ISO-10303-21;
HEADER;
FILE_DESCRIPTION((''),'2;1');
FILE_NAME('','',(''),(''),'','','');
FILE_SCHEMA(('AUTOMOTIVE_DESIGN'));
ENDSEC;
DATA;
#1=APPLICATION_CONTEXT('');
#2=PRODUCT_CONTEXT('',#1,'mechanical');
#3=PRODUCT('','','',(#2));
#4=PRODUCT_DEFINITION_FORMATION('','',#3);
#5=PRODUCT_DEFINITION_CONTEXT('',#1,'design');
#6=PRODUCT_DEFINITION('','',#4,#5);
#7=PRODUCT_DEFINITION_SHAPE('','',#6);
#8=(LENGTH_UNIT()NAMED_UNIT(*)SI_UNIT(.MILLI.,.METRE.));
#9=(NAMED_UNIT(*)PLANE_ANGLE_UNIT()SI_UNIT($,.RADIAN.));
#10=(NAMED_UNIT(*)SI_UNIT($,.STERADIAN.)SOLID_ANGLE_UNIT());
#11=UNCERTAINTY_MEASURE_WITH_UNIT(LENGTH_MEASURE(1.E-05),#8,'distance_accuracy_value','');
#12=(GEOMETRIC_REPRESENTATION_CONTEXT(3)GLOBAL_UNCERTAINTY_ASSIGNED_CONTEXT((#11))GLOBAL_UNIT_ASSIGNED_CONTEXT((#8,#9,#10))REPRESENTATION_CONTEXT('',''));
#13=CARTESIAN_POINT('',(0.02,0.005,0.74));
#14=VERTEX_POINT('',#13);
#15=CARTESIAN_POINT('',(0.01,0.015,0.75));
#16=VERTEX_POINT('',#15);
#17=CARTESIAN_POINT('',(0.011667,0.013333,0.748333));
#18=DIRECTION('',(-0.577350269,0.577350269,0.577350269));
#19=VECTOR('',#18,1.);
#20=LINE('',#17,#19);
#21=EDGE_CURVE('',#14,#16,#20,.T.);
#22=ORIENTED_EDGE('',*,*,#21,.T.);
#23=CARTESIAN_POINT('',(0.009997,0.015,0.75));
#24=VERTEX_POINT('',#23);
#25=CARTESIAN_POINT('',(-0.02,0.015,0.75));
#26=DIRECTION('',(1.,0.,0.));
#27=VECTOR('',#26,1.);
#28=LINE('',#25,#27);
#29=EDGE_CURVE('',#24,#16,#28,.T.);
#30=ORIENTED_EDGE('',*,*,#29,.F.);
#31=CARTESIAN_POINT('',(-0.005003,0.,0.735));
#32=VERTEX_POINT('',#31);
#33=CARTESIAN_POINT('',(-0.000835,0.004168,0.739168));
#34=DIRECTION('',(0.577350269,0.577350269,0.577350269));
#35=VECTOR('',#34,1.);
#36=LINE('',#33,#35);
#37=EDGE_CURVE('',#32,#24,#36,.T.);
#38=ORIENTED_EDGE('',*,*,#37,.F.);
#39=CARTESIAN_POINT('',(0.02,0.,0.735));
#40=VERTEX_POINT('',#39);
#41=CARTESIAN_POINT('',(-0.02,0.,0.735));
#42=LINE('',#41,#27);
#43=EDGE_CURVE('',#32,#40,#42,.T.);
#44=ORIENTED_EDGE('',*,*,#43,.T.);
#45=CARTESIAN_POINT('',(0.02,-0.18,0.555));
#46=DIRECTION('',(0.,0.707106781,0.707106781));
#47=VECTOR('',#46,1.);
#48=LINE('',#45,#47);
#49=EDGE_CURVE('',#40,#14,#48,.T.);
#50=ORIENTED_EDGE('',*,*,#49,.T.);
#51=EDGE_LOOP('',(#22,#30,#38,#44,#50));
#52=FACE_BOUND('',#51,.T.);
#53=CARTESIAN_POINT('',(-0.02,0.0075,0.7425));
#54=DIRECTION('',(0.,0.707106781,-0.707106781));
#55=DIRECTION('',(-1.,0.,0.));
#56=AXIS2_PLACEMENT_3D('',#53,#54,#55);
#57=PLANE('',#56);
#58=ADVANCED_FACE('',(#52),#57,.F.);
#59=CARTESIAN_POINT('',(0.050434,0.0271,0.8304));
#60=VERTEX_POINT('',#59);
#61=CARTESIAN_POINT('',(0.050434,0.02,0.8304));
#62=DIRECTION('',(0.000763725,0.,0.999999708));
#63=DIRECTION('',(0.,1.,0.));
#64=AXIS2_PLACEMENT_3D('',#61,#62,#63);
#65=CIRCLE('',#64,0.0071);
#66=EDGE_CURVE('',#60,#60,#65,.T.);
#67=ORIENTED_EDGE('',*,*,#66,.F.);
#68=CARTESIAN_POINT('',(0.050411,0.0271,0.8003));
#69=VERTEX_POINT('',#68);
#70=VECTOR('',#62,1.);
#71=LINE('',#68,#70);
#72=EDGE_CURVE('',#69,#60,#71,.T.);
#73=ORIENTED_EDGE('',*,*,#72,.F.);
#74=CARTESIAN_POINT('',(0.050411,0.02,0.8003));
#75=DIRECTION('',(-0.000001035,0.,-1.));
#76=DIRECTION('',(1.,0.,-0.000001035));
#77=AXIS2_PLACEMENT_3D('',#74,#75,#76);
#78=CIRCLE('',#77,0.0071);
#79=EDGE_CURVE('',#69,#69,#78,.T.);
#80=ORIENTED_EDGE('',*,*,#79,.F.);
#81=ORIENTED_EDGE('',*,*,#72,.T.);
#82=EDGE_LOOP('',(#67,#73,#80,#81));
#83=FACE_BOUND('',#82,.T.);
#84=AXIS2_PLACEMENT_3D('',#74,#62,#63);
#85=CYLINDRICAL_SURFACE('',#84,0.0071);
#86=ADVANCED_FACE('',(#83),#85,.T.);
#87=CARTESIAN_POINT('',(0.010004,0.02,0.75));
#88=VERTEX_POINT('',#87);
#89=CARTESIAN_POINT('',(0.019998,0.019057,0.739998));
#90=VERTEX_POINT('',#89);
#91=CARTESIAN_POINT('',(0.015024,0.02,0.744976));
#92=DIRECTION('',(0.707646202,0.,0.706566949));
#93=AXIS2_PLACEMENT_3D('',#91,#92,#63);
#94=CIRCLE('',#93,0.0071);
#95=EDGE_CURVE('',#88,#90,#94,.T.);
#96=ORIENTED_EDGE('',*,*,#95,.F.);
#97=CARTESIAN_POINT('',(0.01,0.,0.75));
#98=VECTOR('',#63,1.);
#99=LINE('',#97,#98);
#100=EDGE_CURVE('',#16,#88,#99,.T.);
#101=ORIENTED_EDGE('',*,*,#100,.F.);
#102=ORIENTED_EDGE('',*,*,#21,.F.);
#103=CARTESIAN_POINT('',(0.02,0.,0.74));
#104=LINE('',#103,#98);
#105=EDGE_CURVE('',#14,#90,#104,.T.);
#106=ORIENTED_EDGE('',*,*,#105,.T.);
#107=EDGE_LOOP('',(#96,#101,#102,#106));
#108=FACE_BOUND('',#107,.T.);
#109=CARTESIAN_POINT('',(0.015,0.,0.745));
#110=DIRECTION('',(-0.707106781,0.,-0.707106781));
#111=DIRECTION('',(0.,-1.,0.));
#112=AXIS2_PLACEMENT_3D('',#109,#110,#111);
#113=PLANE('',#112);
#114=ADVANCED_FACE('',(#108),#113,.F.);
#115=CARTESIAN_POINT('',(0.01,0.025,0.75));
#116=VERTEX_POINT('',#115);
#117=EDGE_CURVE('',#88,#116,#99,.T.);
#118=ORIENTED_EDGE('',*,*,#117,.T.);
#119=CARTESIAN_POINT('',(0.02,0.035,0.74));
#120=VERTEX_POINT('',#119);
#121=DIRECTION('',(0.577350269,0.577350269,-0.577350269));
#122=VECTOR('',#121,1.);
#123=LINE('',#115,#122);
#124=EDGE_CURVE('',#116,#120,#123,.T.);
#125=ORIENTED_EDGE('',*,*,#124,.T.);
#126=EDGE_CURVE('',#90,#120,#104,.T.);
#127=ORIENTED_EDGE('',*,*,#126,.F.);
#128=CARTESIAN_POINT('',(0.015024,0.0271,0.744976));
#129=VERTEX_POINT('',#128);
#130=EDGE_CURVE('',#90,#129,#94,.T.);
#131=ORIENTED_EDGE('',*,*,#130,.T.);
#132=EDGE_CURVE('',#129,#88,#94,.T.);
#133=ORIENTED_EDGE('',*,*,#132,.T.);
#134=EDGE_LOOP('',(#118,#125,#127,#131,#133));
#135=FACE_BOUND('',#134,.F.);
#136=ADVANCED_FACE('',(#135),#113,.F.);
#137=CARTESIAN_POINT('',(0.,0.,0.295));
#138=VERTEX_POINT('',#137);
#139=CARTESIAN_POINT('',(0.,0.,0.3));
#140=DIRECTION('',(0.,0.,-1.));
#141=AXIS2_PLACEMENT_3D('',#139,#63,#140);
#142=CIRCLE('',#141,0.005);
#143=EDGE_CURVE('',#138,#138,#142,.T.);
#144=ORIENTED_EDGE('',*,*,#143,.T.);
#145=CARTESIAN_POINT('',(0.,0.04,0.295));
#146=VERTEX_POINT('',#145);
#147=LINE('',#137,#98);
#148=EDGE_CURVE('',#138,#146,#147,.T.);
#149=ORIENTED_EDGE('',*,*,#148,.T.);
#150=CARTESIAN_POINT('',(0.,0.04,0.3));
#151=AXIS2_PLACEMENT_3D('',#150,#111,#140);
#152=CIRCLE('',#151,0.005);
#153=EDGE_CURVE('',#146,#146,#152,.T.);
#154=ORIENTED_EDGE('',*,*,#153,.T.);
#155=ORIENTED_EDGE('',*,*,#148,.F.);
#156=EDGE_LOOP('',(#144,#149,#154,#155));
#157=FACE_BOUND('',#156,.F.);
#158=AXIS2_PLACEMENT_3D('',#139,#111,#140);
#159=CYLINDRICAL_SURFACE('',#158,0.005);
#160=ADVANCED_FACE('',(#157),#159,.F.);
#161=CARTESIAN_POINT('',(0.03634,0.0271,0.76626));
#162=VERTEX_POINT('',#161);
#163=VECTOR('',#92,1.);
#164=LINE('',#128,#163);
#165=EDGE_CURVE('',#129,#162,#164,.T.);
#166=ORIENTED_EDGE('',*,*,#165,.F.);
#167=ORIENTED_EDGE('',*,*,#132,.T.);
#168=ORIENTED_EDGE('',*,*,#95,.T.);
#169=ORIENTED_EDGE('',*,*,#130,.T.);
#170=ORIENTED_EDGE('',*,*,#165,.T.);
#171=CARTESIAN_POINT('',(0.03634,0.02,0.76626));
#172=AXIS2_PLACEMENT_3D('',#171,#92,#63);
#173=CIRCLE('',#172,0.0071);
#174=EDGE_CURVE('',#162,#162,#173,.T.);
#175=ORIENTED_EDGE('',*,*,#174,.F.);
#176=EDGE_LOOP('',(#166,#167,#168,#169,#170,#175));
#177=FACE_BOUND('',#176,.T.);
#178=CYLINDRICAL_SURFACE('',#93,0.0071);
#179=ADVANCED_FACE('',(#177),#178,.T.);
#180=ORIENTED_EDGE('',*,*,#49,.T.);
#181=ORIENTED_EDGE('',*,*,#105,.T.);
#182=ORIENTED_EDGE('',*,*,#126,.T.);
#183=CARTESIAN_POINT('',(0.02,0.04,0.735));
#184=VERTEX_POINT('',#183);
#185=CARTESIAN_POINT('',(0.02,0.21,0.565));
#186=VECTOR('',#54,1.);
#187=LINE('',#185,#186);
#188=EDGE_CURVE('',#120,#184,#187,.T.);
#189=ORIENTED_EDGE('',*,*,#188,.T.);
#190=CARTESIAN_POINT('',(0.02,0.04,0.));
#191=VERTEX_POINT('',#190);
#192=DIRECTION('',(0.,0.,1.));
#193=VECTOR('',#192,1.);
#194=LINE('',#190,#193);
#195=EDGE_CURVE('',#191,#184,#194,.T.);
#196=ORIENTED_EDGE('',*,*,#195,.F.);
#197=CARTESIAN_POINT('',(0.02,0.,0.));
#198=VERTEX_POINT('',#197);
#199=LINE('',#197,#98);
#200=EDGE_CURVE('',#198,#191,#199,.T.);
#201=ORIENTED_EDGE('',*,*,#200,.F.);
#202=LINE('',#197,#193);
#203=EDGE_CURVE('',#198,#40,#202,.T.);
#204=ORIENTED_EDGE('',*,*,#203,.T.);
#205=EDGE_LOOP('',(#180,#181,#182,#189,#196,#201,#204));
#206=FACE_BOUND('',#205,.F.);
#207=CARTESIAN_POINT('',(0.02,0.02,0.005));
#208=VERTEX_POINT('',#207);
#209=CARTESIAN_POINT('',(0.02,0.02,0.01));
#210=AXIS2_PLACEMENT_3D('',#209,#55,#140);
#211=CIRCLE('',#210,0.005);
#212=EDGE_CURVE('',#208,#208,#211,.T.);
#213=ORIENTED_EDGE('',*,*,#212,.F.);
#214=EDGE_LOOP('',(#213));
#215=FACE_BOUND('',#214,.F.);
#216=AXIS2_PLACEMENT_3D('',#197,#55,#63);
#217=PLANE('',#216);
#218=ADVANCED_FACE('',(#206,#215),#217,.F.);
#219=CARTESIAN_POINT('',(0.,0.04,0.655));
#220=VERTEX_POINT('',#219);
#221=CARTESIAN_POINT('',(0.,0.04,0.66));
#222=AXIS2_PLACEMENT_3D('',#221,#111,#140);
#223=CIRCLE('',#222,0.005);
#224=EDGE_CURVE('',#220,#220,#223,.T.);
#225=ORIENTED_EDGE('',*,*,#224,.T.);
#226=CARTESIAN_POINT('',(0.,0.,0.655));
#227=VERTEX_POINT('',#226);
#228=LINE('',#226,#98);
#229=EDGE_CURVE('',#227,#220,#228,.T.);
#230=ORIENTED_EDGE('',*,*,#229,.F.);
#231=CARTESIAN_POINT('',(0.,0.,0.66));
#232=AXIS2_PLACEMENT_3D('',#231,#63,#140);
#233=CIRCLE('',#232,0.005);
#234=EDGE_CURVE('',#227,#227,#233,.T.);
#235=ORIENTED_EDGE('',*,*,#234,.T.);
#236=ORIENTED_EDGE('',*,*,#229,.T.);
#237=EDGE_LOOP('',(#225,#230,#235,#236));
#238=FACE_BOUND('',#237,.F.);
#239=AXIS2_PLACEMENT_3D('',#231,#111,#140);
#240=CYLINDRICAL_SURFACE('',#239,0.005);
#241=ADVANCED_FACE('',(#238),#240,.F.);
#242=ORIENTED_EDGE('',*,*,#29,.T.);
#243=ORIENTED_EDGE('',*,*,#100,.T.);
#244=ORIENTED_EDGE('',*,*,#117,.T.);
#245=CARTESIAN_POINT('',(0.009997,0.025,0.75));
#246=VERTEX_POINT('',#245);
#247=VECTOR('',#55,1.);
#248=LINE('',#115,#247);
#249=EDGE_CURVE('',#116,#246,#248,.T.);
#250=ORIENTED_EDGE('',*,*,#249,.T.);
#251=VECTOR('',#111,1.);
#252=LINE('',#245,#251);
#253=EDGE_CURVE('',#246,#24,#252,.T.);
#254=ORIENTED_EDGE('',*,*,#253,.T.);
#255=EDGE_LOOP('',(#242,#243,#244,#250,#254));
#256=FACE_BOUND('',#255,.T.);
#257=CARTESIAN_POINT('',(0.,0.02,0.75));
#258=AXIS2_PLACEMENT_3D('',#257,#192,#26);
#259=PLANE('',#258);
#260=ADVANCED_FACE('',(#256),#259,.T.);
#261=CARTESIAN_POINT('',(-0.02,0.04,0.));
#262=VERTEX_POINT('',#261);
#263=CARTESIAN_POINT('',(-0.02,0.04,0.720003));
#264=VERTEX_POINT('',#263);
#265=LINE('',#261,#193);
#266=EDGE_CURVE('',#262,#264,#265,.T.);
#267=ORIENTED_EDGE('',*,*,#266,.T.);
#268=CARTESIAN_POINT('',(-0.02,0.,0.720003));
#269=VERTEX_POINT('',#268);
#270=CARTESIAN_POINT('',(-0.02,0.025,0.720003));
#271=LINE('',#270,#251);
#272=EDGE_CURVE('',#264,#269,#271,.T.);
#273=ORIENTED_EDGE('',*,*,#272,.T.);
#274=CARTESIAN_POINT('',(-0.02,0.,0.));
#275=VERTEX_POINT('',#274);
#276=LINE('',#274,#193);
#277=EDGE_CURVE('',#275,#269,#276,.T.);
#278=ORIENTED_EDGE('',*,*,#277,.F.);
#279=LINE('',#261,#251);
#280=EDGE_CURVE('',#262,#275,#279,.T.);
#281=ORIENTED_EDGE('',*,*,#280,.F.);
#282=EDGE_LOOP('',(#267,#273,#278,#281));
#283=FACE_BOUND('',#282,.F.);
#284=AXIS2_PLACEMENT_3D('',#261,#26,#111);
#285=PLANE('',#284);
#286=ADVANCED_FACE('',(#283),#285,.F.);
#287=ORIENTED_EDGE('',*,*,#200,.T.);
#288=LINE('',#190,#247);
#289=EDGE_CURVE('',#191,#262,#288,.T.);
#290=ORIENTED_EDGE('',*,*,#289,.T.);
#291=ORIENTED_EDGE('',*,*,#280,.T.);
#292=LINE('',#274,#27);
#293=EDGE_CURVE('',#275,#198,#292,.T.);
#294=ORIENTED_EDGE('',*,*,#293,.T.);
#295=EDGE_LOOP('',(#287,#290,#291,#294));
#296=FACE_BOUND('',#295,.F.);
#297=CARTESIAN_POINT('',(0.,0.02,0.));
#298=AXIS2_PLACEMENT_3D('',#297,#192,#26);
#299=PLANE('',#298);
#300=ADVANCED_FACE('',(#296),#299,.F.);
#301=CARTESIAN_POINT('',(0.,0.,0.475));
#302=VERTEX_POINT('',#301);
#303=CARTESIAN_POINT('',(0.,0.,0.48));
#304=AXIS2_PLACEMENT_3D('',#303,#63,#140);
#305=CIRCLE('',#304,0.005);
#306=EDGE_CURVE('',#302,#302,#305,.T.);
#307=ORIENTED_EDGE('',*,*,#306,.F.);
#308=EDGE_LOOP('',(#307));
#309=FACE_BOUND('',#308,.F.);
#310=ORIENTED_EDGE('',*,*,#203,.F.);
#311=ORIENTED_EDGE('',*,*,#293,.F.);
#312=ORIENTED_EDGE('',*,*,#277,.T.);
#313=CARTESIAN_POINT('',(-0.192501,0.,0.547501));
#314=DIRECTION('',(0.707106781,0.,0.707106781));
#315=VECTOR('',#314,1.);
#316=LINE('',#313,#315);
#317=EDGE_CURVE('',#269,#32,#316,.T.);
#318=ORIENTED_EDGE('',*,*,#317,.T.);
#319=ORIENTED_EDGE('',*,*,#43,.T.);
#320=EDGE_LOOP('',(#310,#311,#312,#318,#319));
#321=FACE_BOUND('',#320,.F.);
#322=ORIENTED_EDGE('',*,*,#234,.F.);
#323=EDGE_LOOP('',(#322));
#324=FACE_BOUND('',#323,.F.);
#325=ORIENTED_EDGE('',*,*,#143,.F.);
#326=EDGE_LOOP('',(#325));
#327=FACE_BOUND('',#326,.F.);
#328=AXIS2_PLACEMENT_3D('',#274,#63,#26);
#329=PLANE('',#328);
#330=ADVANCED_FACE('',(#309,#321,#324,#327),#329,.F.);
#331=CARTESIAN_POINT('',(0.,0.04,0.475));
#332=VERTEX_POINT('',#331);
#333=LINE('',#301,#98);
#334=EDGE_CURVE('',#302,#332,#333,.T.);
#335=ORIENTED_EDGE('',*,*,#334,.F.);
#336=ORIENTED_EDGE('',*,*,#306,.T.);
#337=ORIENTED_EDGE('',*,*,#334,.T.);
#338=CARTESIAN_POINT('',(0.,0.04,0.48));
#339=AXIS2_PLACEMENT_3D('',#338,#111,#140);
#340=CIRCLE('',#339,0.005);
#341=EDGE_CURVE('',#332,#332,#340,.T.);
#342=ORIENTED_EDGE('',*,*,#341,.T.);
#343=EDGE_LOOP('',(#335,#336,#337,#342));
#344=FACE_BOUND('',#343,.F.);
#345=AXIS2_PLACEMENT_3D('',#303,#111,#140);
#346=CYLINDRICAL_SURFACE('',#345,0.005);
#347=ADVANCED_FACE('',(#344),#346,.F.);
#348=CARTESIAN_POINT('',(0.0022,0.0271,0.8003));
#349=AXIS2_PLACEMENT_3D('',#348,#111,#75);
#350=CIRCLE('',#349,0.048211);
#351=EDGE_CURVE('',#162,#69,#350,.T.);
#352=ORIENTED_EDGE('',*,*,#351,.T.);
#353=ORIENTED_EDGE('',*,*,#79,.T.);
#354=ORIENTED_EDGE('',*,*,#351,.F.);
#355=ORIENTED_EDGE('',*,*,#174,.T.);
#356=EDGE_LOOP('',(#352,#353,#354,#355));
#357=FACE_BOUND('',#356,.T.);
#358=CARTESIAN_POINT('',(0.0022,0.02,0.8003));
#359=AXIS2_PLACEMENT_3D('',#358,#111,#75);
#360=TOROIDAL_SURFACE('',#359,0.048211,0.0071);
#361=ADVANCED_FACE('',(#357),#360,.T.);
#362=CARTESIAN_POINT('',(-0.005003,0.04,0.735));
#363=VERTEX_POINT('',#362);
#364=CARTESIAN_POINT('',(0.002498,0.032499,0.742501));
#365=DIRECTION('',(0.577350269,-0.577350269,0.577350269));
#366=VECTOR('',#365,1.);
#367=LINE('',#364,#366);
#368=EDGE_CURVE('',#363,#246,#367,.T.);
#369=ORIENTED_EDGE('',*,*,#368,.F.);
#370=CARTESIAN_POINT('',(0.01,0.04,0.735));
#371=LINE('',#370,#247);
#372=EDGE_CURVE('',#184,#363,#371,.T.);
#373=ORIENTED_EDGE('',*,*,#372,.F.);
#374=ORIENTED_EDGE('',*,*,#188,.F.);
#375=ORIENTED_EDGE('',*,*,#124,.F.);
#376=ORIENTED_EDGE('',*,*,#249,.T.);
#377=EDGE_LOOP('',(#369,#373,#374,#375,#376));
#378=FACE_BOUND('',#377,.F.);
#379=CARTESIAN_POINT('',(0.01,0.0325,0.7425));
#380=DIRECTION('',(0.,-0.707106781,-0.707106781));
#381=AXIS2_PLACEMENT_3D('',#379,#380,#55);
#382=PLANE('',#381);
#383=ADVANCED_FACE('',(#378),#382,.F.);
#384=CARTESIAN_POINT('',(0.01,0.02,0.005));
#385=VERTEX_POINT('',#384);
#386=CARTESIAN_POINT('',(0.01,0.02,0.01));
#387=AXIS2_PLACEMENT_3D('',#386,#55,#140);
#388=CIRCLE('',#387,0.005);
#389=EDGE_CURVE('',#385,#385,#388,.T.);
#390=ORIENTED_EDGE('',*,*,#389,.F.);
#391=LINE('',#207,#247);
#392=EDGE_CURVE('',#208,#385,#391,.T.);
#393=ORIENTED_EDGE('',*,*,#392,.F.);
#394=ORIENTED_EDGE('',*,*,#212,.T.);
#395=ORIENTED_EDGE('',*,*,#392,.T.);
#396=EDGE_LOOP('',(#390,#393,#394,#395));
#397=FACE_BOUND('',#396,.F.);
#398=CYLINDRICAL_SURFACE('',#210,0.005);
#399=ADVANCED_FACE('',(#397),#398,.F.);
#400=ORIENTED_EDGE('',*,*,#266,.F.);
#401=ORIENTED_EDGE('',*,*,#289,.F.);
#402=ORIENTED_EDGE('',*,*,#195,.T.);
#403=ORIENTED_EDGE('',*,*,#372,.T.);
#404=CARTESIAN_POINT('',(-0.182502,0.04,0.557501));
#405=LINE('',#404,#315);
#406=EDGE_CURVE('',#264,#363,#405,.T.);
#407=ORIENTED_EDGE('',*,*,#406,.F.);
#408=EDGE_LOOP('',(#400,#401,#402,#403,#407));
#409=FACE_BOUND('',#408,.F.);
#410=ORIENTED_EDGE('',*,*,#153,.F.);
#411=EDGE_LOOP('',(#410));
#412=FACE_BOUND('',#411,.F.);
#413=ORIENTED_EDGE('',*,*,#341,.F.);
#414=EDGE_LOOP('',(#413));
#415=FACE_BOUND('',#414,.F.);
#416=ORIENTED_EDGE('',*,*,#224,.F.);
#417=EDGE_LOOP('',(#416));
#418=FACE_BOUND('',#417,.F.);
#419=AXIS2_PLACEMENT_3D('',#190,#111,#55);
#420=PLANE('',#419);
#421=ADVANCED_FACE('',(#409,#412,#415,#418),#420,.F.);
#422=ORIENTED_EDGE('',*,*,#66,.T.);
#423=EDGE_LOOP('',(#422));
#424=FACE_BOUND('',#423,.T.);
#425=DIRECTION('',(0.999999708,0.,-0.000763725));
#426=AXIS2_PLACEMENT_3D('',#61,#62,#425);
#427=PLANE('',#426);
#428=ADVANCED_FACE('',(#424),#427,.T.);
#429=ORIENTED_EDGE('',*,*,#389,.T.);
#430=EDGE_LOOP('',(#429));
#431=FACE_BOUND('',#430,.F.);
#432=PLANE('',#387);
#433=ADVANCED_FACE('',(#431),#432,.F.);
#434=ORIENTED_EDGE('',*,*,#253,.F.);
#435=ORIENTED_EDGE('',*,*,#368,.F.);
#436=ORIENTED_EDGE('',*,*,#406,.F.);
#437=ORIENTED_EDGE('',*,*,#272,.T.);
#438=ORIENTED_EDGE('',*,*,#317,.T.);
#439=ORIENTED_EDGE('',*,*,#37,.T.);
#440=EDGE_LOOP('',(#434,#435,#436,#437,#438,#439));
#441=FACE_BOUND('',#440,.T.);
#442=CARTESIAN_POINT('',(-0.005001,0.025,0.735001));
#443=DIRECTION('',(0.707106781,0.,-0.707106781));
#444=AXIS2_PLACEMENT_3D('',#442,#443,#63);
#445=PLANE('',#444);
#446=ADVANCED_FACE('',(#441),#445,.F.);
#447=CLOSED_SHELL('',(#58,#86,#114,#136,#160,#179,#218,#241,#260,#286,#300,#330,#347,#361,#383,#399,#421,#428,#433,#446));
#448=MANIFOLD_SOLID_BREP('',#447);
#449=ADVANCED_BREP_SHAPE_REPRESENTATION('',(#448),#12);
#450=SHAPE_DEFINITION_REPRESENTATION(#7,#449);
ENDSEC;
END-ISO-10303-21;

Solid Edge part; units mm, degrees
sketch "Sketch1" plane through (0, 0, 0) normal (0, 0, 1) x (1, 0, 0)
  line L0 (-0.02, 0) -> (0.02, 0)
  line L1 (0.02, 0) -> (0.02, 0.04)
  line L2 (0.02, 0.04) -> (-0.02, 0.04)
  line L3 (-0.02, 0.04) -> (-0.02, 0)
  dimension "D1" = 0.04
extrude "Protrusion1" add sketch "Sketch1" along normal blind 0.75
chamfer "Fase_1" distance 0.01 angle 45 1 edges at (0.02, 0.02, 0.75)
sketch "Sketch2" plane through (0, 0.02, 0.45) normal (0, -1, 0) x (0, 0, -1)
  line L0 (-0.295, 0.015) -> (-0.3163, 0.0363)
  arc A0 (-0.3163, 0.0363) -> (-0.3503, 0.0504) centre (-0.3503, 0.0022) ccw
  line L1 (-0.3503, 0.0504) -> (-0.3804, 0.0504)
  dimension "D1" = 0.0301
  dimension "D2" = 0.0301
sketch "Sketch3" plane through (-0.06, 0.02, 0.82) normal (0.7071068, 0, 0.7071068) x (0, 1, 0)
  circle A0 centre (0, -0.1061) radius 0.0071
sweep "SweptProtrusion1" add profiles "Sketch3" path "Sketch2"
chamfer "Fase_3" distance 0.015 angle 45 2 edges at (-0.005, 0, 0.75) (-0.005, 0.04, 0.75)
chamfer "Fase_2" distance 0.03 angle 45 1 edges at (-0.02, 0.02, 0.75)
hole "Bohrung_1" at (0.02, 0.02, 0.01) direction (-1, 0, 0) diameter 0.01 depth 0.01
hole "Bohrung_2" at (0, 0, 0.48) direction (0, 1, 0) diameter 0.01 end up to next
hole "Hole1" at (0, 0, 0.66) direction (0, 1, 0) diameter 0.01 end up to next
hole "Hole2" at (0, 0, 0.3) direction (0, 1, 0) diameter 0.01 end up to next
